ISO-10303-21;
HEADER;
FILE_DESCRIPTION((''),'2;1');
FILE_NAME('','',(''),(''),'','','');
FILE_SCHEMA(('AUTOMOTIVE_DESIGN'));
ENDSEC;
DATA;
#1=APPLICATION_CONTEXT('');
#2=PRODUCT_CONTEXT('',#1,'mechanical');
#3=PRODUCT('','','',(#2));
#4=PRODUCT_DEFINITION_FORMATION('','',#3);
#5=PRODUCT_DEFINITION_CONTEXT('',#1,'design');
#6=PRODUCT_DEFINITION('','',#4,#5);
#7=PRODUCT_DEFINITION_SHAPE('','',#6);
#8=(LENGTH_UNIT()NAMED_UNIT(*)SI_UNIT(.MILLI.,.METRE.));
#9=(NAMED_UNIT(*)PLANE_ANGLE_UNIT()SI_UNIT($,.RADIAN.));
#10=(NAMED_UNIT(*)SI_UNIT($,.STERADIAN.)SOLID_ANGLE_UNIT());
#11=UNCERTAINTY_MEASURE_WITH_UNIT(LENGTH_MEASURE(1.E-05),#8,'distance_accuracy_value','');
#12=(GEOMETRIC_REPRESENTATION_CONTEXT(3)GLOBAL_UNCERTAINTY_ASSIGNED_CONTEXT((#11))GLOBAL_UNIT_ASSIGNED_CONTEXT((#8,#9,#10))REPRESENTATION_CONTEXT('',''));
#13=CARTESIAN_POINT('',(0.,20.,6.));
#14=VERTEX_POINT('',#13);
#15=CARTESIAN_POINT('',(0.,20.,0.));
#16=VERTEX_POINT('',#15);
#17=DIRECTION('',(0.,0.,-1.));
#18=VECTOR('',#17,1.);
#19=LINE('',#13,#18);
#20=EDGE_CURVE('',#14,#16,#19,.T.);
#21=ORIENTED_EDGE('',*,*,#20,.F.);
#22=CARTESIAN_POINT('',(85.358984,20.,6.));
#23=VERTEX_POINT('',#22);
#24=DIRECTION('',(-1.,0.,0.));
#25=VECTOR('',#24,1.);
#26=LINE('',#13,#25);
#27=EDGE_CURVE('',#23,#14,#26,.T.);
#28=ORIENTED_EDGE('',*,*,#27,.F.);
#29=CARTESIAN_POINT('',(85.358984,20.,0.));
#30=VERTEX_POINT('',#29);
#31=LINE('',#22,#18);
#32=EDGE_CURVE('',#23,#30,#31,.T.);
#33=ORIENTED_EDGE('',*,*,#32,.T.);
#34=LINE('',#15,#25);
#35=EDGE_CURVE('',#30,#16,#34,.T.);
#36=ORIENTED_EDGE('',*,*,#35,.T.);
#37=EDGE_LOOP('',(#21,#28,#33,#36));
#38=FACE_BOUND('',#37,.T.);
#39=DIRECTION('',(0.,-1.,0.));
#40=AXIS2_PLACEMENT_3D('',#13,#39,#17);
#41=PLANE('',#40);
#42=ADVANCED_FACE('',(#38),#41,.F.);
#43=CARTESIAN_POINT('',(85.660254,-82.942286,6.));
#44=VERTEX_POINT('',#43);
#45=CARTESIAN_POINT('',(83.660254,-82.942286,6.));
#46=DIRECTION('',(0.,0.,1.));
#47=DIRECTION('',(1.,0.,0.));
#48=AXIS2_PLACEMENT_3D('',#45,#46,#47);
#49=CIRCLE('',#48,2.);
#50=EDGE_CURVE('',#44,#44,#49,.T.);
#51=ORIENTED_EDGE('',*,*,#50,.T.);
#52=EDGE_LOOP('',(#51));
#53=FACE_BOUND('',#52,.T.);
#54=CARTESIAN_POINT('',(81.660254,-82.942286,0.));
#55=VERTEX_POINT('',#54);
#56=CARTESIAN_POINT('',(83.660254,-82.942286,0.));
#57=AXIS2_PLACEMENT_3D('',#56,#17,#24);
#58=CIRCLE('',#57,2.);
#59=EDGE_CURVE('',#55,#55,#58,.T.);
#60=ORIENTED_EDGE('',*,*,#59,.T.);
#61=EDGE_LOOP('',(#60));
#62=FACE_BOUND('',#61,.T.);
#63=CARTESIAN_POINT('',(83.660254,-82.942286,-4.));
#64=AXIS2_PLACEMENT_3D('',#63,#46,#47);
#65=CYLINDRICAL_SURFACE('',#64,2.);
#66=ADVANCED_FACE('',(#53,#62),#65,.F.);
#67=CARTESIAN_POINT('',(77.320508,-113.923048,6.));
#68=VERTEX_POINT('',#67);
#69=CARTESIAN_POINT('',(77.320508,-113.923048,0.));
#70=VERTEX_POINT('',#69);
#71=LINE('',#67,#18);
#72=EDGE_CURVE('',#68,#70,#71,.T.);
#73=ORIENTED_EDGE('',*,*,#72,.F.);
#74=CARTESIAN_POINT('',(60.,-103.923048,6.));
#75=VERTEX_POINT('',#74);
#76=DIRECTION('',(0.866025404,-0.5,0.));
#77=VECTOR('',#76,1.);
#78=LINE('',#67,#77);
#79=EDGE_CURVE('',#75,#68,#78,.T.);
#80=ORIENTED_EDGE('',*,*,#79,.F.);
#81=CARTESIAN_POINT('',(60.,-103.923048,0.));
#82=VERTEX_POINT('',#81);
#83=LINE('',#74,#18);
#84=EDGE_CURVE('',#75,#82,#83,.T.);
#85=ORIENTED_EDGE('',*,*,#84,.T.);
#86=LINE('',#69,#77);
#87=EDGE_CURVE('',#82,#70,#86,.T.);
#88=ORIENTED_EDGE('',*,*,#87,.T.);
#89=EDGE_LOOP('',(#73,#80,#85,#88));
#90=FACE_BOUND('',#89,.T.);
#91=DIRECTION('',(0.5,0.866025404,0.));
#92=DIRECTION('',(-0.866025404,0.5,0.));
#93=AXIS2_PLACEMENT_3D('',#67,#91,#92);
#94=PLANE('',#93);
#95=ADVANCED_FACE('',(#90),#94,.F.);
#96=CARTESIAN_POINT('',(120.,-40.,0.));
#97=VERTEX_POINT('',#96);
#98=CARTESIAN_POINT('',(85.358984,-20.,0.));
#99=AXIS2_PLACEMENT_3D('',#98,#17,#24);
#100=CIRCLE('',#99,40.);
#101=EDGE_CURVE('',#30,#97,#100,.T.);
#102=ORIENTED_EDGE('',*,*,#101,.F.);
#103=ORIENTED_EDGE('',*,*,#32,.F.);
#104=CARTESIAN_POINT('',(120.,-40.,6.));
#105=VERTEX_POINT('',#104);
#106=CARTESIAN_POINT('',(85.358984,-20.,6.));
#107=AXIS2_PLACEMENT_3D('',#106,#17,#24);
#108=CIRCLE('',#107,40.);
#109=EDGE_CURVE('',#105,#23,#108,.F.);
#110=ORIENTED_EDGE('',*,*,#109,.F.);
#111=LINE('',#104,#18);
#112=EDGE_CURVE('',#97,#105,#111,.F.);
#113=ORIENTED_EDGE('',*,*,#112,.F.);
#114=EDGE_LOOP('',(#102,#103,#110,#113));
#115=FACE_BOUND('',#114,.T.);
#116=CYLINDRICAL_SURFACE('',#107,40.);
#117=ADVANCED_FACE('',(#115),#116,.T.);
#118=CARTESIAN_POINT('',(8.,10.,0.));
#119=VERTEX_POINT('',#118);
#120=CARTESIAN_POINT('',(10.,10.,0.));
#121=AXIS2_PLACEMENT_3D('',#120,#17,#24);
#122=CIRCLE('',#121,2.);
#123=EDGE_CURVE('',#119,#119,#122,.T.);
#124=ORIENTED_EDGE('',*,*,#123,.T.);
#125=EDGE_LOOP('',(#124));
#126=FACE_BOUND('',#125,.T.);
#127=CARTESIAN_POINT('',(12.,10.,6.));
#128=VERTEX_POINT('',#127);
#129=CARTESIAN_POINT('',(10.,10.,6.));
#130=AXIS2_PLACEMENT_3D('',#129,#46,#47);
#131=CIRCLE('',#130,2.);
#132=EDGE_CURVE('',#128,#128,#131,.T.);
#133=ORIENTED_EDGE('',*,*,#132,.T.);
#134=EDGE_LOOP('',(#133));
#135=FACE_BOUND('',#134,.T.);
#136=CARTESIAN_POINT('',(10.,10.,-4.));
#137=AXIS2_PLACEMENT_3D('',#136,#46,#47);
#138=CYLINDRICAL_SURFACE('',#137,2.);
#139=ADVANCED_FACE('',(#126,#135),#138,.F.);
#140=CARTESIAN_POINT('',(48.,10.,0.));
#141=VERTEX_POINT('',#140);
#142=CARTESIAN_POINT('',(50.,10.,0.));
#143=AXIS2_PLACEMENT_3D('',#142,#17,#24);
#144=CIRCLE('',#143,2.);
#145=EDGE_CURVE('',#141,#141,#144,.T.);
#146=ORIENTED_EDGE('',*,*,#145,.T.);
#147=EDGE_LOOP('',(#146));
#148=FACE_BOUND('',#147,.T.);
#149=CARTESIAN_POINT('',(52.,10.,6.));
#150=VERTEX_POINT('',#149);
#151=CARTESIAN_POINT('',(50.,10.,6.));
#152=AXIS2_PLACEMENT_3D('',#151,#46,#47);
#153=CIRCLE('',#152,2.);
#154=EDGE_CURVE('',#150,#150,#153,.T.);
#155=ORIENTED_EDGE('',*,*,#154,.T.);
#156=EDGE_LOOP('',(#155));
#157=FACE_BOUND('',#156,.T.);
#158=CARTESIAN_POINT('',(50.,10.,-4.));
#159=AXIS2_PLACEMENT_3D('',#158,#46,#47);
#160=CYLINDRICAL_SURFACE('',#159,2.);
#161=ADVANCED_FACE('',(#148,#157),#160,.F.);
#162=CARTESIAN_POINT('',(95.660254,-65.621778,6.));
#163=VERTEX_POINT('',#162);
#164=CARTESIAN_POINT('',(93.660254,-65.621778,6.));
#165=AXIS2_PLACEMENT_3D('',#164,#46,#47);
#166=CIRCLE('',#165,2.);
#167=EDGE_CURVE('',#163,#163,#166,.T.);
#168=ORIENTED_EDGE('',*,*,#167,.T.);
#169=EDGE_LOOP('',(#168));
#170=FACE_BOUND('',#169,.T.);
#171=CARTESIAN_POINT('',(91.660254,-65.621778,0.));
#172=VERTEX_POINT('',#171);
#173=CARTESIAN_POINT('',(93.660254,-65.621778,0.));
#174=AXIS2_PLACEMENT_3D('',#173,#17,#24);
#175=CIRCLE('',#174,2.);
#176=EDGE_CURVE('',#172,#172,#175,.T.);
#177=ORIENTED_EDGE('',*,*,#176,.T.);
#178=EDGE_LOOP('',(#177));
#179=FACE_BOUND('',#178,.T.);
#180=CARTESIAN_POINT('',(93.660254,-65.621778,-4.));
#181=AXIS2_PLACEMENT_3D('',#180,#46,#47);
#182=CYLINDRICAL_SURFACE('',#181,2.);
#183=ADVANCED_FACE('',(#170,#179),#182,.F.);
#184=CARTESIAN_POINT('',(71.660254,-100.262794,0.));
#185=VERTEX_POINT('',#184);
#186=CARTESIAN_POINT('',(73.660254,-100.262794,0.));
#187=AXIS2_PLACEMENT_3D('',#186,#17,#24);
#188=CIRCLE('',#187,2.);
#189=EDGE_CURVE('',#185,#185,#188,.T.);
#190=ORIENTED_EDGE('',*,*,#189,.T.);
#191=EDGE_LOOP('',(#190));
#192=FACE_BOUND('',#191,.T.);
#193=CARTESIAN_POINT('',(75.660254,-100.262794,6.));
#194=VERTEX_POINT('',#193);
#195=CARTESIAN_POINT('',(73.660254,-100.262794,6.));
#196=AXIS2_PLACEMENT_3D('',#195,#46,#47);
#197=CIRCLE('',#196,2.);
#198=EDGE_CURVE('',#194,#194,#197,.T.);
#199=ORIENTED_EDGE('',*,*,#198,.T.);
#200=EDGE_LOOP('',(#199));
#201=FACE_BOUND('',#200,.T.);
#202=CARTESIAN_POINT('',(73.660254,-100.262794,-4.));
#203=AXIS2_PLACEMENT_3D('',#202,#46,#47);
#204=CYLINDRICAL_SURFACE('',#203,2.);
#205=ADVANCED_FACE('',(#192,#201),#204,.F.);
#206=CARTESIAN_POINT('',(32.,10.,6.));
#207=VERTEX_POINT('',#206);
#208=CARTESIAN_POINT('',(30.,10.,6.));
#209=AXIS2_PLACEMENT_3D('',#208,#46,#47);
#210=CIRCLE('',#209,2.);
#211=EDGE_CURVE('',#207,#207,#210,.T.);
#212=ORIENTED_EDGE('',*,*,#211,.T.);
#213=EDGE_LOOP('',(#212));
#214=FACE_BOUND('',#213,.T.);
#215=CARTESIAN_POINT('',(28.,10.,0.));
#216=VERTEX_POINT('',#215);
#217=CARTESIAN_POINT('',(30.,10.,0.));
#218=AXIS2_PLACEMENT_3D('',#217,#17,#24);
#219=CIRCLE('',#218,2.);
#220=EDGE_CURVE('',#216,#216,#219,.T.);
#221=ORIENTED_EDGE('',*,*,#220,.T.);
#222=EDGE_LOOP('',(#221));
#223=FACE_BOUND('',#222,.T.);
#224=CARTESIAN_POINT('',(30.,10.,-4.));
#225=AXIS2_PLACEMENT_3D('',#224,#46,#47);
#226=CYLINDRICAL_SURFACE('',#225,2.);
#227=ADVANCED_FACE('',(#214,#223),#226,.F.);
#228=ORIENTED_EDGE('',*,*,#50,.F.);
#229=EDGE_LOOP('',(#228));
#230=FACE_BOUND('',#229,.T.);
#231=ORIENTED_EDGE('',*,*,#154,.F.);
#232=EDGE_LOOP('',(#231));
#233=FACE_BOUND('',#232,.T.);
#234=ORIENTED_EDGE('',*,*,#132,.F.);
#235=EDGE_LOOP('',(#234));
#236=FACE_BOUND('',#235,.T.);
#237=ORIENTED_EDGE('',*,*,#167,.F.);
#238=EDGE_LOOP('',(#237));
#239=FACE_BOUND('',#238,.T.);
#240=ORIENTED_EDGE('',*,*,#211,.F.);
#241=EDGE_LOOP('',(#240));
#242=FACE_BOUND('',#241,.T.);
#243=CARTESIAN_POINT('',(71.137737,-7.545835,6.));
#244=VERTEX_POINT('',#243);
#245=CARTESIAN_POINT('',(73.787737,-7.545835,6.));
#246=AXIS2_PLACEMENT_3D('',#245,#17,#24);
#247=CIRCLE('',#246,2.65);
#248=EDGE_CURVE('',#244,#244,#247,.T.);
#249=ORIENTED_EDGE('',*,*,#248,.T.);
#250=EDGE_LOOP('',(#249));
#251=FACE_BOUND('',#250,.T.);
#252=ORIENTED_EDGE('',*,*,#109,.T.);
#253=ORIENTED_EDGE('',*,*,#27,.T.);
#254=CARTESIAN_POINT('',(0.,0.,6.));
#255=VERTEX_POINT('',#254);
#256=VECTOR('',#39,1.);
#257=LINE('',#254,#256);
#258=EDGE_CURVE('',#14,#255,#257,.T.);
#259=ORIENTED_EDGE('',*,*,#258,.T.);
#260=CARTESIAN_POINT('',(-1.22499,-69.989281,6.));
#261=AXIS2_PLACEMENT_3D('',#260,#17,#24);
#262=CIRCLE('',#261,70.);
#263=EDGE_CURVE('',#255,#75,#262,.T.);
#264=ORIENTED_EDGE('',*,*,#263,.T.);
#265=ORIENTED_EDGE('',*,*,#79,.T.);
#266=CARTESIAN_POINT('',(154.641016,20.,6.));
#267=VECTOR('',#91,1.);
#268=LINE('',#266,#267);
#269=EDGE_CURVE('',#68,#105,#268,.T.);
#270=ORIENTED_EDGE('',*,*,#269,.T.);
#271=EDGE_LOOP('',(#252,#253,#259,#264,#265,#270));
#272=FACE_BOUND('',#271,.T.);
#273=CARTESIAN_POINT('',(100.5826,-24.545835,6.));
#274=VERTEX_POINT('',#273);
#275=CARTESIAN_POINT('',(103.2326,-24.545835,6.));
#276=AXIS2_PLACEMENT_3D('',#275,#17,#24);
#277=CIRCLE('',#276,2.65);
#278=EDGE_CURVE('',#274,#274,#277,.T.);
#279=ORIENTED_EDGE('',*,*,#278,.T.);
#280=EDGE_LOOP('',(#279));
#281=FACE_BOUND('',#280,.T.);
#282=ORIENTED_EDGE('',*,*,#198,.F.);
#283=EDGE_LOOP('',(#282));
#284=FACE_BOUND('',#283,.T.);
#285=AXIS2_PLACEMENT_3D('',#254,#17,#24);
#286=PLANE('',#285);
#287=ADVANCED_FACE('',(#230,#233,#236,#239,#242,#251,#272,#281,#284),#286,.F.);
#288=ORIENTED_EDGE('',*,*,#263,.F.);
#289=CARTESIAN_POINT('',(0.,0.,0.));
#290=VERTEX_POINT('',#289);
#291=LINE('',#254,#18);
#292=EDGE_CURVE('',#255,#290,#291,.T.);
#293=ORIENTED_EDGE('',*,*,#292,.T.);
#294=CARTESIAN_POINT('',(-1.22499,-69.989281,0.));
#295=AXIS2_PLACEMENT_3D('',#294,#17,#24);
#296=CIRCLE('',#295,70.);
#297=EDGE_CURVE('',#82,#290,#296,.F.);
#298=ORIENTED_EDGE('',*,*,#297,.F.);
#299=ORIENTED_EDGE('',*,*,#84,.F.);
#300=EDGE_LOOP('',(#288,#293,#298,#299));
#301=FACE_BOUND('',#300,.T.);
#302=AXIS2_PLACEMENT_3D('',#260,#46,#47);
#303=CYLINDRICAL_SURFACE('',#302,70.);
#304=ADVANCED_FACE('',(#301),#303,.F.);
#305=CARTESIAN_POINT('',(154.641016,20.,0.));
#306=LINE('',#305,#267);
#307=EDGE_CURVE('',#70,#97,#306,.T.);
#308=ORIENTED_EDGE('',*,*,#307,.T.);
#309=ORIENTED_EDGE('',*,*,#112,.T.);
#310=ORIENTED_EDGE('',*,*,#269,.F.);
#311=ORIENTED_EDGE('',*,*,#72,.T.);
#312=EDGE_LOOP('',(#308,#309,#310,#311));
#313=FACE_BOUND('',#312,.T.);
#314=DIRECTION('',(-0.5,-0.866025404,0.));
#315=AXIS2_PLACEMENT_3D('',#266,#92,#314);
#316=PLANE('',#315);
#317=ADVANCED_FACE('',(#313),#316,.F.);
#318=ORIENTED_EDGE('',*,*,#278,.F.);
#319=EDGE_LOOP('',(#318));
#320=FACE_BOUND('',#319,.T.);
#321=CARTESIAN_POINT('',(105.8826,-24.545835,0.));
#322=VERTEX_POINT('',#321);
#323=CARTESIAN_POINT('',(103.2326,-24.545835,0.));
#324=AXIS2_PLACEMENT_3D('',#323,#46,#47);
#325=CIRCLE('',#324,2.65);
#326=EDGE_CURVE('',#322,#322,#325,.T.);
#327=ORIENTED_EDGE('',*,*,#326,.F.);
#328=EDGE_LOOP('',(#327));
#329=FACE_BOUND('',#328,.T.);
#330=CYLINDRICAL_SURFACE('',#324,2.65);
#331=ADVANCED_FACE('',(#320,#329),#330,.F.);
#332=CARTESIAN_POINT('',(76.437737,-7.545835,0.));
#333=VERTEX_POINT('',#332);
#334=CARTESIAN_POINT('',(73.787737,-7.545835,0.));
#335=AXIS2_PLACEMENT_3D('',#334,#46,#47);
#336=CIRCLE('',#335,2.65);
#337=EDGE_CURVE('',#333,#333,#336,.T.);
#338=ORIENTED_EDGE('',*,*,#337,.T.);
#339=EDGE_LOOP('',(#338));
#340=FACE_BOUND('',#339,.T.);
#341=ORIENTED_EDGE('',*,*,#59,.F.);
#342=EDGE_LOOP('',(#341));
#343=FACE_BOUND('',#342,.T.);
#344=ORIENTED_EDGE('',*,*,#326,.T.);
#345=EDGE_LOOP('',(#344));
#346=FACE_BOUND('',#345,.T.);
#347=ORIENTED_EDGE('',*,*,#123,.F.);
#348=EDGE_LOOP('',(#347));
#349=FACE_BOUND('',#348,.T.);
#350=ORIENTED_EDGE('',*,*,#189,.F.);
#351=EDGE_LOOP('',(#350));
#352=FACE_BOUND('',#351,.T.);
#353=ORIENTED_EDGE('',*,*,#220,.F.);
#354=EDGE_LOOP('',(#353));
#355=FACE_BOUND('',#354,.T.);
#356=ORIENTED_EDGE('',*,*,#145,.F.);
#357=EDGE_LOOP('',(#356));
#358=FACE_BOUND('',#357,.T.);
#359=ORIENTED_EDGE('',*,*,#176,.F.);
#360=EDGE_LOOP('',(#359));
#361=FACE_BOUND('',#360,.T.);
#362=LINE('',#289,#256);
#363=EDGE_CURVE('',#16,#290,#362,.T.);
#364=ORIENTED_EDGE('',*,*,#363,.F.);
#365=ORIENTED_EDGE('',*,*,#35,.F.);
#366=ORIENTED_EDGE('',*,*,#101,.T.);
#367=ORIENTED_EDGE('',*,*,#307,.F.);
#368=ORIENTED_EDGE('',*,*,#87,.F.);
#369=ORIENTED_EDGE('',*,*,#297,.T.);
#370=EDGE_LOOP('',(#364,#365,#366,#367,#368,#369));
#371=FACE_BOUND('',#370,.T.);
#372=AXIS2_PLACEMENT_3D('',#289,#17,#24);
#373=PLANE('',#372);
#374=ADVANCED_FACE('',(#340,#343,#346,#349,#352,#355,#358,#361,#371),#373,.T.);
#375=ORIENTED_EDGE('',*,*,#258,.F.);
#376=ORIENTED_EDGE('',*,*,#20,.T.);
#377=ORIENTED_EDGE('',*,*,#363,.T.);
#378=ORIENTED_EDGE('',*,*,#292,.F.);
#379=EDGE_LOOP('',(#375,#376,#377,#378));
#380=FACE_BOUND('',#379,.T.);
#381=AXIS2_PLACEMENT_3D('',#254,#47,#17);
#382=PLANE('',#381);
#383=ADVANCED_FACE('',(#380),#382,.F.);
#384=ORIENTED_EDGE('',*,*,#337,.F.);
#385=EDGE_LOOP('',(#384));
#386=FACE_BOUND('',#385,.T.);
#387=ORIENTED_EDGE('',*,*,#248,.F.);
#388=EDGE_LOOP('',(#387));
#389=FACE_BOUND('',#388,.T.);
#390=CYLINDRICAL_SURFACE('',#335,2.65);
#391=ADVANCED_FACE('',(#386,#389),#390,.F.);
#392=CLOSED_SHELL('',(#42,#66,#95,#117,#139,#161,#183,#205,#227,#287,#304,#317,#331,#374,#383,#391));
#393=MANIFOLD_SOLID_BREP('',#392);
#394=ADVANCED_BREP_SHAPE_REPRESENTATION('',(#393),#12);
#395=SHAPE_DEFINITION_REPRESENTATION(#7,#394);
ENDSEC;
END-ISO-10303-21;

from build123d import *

# Parameters (mm, degrees)
EXTRUDE_1_DEPTH          = 6
FILLET_1_R               = 70
FILLET_2_R               = 40
CUT_EXTRUDE_1_DEPTH      = 170.497303225
CUT_EXTRUDE_1_DEPTH_BACK = 170.497303225
SKETCH_2_R               = 2.65
SKETCH_3_R               = 2
CUT_EXTRUDE_2_DEPTH      = 10


with BuildPart() as part:
    # 草图1 → 凸台-拉伸1 (new body)
    with BuildSketch(Plane.XY):
        Polygon((0, 0), (120, 0), (60, -103.923048454), (77.320508076, -113.923048454), (154.641016151, 20), (0, 20), align=None)
    extrude(amount=EXTRUDE_1_DEPTH)

    # 圆角1
    # the kernel refuses this fillet: 70 mm, written as the material it adds along each edge
    with BuildSketch(Plane(origin=(120, 0, 0), x_dir=(-1, 0, 0), z_dir=(0, 0, 1))) as fillet_1_piece_1:
        with BuildLine():
            CenterArc((121.224989992, 69.989280604), FILLET_1_R, 151.002719134, 117.994561732)
            Line((60, 103.923048454), (0, 0))
            Line((0, 0), (120, 0))
        make_face()
    extrude(amount=6)

    # 圆角2
    fillet_2_edges = [part.edges().sort_by_distance(p)[0] for p in [
        (154.641016151, 20, 3),
    ]]
    fillet(fillet_2_edges, radius=FILLET_2_R)

    # 草图2 → 切除-拉伸1 (cut, two sides: drawn at the far end of the back side and taken through both)
    with BuildSketch(Plane.XY.offset(6).offset(-CUT_EXTRUDE_1_DEPTH_BACK)):
        with Locations((103.232600298, -24.545834576)):
            Circle(SKETCH_2_R)
        with Locations((73.787736569, -7.545834576)):
            Circle(SKETCH_2_R)
    extrude(amount=CUT_EXTRUDE_1_DEPTH + CUT_EXTRUDE_1_DEPTH_BACK, mode=Mode.SUBTRACT)

    # 草图3 → 切除-拉伸2 (cut)
    with BuildSketch(Plane.XY.offset(6)):
        with Locations((10, 10)):
            Circle(SKETCH_3_R)
        with Locations((30, 10)):
            Circle(SKETCH_3_R)
        with Locations((50, 10)):
            Circle(SKETCH_3_R)
        with Locations((73.660254038, -100.262794416)):
            Circle(SKETCH_3_R)
        with Locations((83.660254038, -82.942286341)):
            Circle(SKETCH_3_R)
        with Locations((93.660254038, -65.621778265)):
            Circle(SKETCH_3_R)
    extrude(amount=-CUT_EXTRUDE_2_DEPTH, mode=Mode.SUBTRACT)


solid = part.part
